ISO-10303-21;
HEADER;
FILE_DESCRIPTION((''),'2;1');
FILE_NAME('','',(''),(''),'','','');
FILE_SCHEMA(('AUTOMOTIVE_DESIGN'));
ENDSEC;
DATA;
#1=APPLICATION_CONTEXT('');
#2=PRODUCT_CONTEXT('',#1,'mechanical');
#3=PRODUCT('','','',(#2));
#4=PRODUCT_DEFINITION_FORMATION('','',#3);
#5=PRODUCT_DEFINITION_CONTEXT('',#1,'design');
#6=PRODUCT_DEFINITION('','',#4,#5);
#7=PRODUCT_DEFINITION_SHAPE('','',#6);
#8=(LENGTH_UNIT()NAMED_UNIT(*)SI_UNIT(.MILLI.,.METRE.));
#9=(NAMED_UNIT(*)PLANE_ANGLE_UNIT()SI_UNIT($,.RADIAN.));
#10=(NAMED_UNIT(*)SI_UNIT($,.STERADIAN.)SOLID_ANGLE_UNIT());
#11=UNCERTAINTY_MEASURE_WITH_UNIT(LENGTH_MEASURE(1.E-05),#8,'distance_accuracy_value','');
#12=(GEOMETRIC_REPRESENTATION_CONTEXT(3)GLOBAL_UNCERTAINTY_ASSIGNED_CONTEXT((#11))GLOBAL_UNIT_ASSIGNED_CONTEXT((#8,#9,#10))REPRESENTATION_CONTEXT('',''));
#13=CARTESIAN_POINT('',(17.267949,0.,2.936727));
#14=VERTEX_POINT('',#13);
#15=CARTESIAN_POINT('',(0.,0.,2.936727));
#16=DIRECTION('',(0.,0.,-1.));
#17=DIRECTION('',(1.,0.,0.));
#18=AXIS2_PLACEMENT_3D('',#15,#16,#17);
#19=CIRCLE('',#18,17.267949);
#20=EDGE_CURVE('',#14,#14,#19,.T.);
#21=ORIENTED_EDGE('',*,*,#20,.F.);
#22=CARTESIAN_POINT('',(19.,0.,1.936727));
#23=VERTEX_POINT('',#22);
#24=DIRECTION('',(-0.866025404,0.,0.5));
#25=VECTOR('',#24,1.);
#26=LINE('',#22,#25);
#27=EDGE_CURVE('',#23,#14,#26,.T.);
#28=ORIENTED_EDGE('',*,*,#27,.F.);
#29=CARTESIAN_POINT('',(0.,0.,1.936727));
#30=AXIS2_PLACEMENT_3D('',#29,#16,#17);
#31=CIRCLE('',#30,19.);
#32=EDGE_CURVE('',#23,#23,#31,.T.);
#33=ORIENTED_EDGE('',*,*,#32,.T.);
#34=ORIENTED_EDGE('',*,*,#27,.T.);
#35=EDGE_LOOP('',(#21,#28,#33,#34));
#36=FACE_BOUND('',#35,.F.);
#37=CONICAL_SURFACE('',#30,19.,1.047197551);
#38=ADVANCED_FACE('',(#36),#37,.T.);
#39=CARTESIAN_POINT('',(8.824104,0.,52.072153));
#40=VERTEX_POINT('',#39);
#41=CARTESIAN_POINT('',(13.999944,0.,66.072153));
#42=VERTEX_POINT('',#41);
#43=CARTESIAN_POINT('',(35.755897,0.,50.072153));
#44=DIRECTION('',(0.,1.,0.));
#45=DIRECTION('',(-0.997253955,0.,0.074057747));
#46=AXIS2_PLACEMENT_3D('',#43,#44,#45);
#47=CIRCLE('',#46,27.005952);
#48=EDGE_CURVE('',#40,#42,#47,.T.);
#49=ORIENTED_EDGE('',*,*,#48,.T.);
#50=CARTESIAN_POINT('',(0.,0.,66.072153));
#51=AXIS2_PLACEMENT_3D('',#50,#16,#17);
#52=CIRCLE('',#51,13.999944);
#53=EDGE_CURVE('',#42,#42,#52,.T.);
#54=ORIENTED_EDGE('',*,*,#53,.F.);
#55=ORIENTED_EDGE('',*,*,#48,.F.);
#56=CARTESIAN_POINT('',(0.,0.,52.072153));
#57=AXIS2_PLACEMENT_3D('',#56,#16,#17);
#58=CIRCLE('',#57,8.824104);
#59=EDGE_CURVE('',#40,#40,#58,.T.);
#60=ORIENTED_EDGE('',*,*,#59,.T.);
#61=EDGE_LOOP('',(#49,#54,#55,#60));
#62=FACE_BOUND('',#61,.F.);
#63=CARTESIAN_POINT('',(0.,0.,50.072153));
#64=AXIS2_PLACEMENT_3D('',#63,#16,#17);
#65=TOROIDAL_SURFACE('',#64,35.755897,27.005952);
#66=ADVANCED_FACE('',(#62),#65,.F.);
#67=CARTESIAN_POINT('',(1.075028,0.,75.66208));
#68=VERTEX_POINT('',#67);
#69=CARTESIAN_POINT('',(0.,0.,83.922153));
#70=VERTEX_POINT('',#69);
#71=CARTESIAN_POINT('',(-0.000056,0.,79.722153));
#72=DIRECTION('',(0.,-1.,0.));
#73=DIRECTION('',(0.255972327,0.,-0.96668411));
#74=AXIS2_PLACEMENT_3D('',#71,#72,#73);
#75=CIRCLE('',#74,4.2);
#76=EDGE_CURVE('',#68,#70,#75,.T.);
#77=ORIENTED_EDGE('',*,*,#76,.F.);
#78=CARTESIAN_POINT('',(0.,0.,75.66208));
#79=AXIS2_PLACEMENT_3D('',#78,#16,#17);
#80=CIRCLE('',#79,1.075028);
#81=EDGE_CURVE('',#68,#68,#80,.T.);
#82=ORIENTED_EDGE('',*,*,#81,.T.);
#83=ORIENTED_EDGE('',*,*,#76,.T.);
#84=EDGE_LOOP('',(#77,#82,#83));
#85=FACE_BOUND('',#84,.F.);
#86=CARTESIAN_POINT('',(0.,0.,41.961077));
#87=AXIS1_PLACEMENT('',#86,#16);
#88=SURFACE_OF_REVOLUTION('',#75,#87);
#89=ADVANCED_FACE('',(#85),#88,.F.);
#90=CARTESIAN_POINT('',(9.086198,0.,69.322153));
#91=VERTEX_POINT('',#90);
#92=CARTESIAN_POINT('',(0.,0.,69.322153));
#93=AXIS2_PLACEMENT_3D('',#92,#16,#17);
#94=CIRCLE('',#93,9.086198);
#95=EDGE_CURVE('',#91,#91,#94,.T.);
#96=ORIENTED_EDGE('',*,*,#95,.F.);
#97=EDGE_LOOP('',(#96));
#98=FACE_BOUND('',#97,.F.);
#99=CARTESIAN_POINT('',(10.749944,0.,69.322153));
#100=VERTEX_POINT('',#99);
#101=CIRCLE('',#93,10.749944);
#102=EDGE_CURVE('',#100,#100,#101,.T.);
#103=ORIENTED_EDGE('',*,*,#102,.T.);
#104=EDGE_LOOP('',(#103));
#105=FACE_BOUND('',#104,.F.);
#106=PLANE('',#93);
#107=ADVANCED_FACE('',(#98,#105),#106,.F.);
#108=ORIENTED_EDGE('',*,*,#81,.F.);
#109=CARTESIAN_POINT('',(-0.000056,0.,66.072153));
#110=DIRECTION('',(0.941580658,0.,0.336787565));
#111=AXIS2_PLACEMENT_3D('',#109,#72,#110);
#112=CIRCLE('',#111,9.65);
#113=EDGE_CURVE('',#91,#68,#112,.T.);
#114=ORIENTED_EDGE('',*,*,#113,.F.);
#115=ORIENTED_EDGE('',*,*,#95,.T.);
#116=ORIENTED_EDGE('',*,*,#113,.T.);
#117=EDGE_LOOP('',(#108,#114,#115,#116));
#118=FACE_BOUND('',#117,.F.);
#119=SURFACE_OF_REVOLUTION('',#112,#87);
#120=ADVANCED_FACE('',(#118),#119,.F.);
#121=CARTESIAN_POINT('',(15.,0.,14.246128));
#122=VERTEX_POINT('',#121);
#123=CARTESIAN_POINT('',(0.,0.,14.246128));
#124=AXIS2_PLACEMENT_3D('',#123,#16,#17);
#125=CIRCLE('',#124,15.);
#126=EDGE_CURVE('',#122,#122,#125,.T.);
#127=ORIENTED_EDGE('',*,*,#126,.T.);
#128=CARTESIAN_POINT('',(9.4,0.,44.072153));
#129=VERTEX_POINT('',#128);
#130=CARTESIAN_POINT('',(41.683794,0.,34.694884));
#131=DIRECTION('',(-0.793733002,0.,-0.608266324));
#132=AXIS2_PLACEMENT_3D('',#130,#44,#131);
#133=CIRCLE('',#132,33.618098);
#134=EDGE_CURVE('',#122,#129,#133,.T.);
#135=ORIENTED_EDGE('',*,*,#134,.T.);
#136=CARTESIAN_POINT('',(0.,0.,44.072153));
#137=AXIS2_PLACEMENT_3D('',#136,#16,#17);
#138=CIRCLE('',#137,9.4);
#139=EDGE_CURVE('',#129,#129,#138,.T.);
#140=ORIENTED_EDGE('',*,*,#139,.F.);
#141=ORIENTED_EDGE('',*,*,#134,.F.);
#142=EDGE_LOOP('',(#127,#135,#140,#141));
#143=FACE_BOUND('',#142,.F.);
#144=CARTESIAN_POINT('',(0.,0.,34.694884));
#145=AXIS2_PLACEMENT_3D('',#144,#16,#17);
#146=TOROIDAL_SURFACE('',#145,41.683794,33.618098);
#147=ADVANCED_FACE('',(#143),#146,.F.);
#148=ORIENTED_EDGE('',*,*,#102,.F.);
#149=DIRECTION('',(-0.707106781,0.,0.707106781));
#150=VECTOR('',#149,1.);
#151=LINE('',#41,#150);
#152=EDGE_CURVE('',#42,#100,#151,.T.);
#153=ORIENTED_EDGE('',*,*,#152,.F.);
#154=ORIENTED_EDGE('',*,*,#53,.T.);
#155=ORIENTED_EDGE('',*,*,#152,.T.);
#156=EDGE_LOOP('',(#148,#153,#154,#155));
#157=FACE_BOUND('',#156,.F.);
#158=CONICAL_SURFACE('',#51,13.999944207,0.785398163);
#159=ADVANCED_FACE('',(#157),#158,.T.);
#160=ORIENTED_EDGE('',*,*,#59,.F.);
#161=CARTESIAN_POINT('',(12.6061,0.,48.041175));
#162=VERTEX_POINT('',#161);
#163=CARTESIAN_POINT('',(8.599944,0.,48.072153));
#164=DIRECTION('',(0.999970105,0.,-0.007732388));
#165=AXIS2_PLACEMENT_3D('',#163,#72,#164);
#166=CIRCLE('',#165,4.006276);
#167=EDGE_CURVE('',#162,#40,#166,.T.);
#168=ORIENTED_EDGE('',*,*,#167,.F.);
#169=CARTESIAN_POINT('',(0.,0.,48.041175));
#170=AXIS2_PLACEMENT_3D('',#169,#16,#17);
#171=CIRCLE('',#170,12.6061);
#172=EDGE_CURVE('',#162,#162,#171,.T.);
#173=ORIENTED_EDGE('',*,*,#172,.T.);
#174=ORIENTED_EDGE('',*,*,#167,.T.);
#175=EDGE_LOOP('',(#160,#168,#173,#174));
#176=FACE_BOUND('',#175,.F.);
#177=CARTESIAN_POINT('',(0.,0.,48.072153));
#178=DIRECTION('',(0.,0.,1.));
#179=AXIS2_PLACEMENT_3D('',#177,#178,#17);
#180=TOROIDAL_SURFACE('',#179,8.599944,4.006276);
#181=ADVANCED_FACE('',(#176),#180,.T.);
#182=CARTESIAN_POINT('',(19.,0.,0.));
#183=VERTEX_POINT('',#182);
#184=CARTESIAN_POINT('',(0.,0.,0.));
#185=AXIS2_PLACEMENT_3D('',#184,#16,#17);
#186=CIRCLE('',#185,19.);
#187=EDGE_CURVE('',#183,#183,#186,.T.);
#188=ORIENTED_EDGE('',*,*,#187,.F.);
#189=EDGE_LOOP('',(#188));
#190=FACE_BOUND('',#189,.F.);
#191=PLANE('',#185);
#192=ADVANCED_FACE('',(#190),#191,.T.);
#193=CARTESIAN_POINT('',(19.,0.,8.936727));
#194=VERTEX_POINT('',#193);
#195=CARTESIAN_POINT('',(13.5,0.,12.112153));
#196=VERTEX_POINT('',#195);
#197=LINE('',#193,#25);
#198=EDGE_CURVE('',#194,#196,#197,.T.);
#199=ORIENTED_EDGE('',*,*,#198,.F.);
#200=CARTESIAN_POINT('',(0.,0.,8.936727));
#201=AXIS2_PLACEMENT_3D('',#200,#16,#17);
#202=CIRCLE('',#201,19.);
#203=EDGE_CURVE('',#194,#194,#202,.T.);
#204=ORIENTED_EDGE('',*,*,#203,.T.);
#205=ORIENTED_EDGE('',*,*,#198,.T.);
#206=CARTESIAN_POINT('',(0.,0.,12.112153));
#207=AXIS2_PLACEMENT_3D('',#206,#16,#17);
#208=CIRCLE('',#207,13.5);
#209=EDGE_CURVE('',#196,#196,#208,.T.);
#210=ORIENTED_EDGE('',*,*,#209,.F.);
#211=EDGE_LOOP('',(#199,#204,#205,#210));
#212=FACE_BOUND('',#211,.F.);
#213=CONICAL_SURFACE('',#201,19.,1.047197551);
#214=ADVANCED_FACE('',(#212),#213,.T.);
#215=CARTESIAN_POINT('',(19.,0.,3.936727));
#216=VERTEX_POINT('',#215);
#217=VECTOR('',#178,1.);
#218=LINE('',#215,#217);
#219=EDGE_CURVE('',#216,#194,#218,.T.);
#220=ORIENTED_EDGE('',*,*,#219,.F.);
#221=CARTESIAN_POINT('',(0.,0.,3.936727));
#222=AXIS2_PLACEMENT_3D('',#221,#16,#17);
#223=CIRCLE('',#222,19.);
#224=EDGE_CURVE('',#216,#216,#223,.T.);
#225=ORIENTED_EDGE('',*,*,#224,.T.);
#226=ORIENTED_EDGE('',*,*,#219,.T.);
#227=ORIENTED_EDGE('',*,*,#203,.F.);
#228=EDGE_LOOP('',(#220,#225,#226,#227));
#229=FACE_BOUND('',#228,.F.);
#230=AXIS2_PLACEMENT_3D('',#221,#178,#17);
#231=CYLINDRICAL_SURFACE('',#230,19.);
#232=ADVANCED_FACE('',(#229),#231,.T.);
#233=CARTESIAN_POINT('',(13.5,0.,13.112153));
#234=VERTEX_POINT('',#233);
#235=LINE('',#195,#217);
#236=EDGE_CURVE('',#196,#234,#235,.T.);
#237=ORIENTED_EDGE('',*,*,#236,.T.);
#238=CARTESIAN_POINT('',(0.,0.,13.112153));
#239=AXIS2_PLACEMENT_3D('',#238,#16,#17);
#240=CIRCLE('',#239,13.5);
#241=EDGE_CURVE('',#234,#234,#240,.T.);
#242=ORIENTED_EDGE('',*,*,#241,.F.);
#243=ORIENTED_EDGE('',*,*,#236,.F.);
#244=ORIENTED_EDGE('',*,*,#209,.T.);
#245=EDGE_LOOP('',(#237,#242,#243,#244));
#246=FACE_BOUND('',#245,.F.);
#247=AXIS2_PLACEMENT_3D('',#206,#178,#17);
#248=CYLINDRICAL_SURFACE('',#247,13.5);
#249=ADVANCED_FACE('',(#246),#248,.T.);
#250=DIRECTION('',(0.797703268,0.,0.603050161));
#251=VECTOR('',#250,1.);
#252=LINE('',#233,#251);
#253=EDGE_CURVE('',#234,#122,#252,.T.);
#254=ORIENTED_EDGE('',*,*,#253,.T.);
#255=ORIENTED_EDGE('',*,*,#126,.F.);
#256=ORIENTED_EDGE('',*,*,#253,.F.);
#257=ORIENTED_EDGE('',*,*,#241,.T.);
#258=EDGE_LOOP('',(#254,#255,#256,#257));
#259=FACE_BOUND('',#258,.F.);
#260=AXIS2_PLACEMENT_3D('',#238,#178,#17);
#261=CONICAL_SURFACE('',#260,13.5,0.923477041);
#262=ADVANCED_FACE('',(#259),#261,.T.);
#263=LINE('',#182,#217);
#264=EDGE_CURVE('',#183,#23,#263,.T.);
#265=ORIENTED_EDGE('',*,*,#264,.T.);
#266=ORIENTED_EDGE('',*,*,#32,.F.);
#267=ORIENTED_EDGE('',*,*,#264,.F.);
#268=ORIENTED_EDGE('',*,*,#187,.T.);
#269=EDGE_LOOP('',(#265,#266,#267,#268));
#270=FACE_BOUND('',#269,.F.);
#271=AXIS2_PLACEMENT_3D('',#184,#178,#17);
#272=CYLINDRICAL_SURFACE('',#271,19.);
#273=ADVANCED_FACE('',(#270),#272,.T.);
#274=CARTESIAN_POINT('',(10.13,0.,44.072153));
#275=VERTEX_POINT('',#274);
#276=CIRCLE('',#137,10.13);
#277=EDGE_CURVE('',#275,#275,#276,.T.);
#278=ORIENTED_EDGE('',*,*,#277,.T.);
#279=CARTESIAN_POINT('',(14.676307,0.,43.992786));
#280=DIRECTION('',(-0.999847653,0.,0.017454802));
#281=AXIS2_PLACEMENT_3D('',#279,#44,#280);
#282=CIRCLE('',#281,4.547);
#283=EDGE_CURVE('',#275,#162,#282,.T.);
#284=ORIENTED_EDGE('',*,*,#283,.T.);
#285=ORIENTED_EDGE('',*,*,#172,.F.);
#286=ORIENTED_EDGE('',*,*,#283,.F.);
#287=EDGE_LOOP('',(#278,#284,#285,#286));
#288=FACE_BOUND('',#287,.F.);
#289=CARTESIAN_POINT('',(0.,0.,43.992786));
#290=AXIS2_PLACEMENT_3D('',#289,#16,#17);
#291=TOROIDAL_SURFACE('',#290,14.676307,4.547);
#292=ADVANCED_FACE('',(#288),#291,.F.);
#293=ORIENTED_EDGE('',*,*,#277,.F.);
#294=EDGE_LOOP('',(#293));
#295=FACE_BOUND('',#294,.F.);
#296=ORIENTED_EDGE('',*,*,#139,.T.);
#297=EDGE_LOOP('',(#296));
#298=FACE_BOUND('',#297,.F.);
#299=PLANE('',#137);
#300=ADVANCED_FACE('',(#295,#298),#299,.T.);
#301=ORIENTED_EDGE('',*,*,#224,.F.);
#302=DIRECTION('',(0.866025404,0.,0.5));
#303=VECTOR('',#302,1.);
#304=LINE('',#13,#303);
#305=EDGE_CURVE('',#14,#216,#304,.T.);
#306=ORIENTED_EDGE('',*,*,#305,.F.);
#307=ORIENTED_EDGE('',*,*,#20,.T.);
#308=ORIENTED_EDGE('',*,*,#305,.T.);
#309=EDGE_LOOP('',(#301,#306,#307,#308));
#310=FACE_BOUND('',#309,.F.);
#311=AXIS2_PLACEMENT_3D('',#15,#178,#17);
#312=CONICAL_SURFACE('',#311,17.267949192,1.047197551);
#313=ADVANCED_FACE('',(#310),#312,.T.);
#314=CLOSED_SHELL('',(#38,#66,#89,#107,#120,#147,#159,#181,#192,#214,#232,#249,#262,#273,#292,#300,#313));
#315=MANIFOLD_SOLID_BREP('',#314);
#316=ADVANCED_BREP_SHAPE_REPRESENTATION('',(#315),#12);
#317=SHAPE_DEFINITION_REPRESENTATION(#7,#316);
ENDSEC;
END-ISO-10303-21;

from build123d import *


# Not quite as in the source:
# - a feature names something its author has since deleted; it is built from what else it names


with BuildPart() as f1:
    # F0 (on Front) → F1 (revolve)
    with BuildSketch(Plane.XZ):
        with BuildLine():
            Line((0, 83.9221530378), (0, 52.0721530382))
            Line((0, 52.0721530382), (8.7499442067, 52.0721530382))
            Line((8.7499442067, 52.0721530382), (8.8241037769, 52.0721530382))
            ThreePointArc((8.8241037769, 52.0721530382), (10.4255958993, 59.4368383526), (13.9999442067, 66.0721530382))
            Line((13.9999442067, 66.0721530382), (10.7499442067, 69.3221530382))
            Line((10.7499442067, 69.3221530382), (9.08619756, 69.3221530382))
            ThreePointArc((9.08619756, 69.3221530382), (5.9884215444, 73.6392290372), (1.0750279815, 75.6620797781))
            ThreePointArc((1.0750279815, 75.6620797781), (4.1648192152, 80.2642011572), (0, 83.9221530378))
        make_face()
        with BuildLine():
            Line((0, 52.0721530382), (0, 48.041174956))
            Line((0, 48.041174956), (12.6061004532, 48.041174956))
            ThreePointArc((12.6061004532, 48.041174956), (11.5216028199, 50.8133495764), (8.8241037769, 52.0721530382))
            Line((8.8241037769, 52.0721530382), (8.7499442067, 52.0721530382))
            Line((8.7499442067, 52.0721530382), (0, 52.0721530382))
        make_face()
        with BuildLine():
            Line((0, 48.041174956), (0, 44.0721530382))
            Line((0, 44.0721530382), (9.4, 44.0721530382))
            Line((9.4, 44.0721530382), (10.13, 44.0721530382))
            ThreePointArc((10.13, 44.0721530382), (10.8184777766, 46.3995183881), (12.6061004532, 48.041174956))
            Line((12.6061004532, 48.041174956), (0, 48.041174956))
        make_face()
        Polygon((19, 0), (19, 1.9367265577), (17.2679491924, 2.9367265577), (19, 3.9367265577), (19, 8.9367265577), (13.5, 12.1121530382), (0, 12.1121530382), (0, 0), align=None)
        with BuildLine():
            Line((0, 44.0721530382), (0, 12.1121530382))
            Line((0, 12.1121530382), (13.5, 12.1121530382))
            Line((13.5, 12.1121530382), (13.5, 13.1121530382))
            Line((13.5, 13.1121530382), (15, 14.2461276344))
            ThreePointArc((15, 14.2461276344), (8.6430304158, 28.4912997708), (9.4, 44.0721530382))
            Line((9.4, 44.0721530382), (0, 44.0721530382))
        make_face()
    revolve(axis=Axis((0, 0, 41.9610765189), (0, 0, -1)))


solid = f1.part
